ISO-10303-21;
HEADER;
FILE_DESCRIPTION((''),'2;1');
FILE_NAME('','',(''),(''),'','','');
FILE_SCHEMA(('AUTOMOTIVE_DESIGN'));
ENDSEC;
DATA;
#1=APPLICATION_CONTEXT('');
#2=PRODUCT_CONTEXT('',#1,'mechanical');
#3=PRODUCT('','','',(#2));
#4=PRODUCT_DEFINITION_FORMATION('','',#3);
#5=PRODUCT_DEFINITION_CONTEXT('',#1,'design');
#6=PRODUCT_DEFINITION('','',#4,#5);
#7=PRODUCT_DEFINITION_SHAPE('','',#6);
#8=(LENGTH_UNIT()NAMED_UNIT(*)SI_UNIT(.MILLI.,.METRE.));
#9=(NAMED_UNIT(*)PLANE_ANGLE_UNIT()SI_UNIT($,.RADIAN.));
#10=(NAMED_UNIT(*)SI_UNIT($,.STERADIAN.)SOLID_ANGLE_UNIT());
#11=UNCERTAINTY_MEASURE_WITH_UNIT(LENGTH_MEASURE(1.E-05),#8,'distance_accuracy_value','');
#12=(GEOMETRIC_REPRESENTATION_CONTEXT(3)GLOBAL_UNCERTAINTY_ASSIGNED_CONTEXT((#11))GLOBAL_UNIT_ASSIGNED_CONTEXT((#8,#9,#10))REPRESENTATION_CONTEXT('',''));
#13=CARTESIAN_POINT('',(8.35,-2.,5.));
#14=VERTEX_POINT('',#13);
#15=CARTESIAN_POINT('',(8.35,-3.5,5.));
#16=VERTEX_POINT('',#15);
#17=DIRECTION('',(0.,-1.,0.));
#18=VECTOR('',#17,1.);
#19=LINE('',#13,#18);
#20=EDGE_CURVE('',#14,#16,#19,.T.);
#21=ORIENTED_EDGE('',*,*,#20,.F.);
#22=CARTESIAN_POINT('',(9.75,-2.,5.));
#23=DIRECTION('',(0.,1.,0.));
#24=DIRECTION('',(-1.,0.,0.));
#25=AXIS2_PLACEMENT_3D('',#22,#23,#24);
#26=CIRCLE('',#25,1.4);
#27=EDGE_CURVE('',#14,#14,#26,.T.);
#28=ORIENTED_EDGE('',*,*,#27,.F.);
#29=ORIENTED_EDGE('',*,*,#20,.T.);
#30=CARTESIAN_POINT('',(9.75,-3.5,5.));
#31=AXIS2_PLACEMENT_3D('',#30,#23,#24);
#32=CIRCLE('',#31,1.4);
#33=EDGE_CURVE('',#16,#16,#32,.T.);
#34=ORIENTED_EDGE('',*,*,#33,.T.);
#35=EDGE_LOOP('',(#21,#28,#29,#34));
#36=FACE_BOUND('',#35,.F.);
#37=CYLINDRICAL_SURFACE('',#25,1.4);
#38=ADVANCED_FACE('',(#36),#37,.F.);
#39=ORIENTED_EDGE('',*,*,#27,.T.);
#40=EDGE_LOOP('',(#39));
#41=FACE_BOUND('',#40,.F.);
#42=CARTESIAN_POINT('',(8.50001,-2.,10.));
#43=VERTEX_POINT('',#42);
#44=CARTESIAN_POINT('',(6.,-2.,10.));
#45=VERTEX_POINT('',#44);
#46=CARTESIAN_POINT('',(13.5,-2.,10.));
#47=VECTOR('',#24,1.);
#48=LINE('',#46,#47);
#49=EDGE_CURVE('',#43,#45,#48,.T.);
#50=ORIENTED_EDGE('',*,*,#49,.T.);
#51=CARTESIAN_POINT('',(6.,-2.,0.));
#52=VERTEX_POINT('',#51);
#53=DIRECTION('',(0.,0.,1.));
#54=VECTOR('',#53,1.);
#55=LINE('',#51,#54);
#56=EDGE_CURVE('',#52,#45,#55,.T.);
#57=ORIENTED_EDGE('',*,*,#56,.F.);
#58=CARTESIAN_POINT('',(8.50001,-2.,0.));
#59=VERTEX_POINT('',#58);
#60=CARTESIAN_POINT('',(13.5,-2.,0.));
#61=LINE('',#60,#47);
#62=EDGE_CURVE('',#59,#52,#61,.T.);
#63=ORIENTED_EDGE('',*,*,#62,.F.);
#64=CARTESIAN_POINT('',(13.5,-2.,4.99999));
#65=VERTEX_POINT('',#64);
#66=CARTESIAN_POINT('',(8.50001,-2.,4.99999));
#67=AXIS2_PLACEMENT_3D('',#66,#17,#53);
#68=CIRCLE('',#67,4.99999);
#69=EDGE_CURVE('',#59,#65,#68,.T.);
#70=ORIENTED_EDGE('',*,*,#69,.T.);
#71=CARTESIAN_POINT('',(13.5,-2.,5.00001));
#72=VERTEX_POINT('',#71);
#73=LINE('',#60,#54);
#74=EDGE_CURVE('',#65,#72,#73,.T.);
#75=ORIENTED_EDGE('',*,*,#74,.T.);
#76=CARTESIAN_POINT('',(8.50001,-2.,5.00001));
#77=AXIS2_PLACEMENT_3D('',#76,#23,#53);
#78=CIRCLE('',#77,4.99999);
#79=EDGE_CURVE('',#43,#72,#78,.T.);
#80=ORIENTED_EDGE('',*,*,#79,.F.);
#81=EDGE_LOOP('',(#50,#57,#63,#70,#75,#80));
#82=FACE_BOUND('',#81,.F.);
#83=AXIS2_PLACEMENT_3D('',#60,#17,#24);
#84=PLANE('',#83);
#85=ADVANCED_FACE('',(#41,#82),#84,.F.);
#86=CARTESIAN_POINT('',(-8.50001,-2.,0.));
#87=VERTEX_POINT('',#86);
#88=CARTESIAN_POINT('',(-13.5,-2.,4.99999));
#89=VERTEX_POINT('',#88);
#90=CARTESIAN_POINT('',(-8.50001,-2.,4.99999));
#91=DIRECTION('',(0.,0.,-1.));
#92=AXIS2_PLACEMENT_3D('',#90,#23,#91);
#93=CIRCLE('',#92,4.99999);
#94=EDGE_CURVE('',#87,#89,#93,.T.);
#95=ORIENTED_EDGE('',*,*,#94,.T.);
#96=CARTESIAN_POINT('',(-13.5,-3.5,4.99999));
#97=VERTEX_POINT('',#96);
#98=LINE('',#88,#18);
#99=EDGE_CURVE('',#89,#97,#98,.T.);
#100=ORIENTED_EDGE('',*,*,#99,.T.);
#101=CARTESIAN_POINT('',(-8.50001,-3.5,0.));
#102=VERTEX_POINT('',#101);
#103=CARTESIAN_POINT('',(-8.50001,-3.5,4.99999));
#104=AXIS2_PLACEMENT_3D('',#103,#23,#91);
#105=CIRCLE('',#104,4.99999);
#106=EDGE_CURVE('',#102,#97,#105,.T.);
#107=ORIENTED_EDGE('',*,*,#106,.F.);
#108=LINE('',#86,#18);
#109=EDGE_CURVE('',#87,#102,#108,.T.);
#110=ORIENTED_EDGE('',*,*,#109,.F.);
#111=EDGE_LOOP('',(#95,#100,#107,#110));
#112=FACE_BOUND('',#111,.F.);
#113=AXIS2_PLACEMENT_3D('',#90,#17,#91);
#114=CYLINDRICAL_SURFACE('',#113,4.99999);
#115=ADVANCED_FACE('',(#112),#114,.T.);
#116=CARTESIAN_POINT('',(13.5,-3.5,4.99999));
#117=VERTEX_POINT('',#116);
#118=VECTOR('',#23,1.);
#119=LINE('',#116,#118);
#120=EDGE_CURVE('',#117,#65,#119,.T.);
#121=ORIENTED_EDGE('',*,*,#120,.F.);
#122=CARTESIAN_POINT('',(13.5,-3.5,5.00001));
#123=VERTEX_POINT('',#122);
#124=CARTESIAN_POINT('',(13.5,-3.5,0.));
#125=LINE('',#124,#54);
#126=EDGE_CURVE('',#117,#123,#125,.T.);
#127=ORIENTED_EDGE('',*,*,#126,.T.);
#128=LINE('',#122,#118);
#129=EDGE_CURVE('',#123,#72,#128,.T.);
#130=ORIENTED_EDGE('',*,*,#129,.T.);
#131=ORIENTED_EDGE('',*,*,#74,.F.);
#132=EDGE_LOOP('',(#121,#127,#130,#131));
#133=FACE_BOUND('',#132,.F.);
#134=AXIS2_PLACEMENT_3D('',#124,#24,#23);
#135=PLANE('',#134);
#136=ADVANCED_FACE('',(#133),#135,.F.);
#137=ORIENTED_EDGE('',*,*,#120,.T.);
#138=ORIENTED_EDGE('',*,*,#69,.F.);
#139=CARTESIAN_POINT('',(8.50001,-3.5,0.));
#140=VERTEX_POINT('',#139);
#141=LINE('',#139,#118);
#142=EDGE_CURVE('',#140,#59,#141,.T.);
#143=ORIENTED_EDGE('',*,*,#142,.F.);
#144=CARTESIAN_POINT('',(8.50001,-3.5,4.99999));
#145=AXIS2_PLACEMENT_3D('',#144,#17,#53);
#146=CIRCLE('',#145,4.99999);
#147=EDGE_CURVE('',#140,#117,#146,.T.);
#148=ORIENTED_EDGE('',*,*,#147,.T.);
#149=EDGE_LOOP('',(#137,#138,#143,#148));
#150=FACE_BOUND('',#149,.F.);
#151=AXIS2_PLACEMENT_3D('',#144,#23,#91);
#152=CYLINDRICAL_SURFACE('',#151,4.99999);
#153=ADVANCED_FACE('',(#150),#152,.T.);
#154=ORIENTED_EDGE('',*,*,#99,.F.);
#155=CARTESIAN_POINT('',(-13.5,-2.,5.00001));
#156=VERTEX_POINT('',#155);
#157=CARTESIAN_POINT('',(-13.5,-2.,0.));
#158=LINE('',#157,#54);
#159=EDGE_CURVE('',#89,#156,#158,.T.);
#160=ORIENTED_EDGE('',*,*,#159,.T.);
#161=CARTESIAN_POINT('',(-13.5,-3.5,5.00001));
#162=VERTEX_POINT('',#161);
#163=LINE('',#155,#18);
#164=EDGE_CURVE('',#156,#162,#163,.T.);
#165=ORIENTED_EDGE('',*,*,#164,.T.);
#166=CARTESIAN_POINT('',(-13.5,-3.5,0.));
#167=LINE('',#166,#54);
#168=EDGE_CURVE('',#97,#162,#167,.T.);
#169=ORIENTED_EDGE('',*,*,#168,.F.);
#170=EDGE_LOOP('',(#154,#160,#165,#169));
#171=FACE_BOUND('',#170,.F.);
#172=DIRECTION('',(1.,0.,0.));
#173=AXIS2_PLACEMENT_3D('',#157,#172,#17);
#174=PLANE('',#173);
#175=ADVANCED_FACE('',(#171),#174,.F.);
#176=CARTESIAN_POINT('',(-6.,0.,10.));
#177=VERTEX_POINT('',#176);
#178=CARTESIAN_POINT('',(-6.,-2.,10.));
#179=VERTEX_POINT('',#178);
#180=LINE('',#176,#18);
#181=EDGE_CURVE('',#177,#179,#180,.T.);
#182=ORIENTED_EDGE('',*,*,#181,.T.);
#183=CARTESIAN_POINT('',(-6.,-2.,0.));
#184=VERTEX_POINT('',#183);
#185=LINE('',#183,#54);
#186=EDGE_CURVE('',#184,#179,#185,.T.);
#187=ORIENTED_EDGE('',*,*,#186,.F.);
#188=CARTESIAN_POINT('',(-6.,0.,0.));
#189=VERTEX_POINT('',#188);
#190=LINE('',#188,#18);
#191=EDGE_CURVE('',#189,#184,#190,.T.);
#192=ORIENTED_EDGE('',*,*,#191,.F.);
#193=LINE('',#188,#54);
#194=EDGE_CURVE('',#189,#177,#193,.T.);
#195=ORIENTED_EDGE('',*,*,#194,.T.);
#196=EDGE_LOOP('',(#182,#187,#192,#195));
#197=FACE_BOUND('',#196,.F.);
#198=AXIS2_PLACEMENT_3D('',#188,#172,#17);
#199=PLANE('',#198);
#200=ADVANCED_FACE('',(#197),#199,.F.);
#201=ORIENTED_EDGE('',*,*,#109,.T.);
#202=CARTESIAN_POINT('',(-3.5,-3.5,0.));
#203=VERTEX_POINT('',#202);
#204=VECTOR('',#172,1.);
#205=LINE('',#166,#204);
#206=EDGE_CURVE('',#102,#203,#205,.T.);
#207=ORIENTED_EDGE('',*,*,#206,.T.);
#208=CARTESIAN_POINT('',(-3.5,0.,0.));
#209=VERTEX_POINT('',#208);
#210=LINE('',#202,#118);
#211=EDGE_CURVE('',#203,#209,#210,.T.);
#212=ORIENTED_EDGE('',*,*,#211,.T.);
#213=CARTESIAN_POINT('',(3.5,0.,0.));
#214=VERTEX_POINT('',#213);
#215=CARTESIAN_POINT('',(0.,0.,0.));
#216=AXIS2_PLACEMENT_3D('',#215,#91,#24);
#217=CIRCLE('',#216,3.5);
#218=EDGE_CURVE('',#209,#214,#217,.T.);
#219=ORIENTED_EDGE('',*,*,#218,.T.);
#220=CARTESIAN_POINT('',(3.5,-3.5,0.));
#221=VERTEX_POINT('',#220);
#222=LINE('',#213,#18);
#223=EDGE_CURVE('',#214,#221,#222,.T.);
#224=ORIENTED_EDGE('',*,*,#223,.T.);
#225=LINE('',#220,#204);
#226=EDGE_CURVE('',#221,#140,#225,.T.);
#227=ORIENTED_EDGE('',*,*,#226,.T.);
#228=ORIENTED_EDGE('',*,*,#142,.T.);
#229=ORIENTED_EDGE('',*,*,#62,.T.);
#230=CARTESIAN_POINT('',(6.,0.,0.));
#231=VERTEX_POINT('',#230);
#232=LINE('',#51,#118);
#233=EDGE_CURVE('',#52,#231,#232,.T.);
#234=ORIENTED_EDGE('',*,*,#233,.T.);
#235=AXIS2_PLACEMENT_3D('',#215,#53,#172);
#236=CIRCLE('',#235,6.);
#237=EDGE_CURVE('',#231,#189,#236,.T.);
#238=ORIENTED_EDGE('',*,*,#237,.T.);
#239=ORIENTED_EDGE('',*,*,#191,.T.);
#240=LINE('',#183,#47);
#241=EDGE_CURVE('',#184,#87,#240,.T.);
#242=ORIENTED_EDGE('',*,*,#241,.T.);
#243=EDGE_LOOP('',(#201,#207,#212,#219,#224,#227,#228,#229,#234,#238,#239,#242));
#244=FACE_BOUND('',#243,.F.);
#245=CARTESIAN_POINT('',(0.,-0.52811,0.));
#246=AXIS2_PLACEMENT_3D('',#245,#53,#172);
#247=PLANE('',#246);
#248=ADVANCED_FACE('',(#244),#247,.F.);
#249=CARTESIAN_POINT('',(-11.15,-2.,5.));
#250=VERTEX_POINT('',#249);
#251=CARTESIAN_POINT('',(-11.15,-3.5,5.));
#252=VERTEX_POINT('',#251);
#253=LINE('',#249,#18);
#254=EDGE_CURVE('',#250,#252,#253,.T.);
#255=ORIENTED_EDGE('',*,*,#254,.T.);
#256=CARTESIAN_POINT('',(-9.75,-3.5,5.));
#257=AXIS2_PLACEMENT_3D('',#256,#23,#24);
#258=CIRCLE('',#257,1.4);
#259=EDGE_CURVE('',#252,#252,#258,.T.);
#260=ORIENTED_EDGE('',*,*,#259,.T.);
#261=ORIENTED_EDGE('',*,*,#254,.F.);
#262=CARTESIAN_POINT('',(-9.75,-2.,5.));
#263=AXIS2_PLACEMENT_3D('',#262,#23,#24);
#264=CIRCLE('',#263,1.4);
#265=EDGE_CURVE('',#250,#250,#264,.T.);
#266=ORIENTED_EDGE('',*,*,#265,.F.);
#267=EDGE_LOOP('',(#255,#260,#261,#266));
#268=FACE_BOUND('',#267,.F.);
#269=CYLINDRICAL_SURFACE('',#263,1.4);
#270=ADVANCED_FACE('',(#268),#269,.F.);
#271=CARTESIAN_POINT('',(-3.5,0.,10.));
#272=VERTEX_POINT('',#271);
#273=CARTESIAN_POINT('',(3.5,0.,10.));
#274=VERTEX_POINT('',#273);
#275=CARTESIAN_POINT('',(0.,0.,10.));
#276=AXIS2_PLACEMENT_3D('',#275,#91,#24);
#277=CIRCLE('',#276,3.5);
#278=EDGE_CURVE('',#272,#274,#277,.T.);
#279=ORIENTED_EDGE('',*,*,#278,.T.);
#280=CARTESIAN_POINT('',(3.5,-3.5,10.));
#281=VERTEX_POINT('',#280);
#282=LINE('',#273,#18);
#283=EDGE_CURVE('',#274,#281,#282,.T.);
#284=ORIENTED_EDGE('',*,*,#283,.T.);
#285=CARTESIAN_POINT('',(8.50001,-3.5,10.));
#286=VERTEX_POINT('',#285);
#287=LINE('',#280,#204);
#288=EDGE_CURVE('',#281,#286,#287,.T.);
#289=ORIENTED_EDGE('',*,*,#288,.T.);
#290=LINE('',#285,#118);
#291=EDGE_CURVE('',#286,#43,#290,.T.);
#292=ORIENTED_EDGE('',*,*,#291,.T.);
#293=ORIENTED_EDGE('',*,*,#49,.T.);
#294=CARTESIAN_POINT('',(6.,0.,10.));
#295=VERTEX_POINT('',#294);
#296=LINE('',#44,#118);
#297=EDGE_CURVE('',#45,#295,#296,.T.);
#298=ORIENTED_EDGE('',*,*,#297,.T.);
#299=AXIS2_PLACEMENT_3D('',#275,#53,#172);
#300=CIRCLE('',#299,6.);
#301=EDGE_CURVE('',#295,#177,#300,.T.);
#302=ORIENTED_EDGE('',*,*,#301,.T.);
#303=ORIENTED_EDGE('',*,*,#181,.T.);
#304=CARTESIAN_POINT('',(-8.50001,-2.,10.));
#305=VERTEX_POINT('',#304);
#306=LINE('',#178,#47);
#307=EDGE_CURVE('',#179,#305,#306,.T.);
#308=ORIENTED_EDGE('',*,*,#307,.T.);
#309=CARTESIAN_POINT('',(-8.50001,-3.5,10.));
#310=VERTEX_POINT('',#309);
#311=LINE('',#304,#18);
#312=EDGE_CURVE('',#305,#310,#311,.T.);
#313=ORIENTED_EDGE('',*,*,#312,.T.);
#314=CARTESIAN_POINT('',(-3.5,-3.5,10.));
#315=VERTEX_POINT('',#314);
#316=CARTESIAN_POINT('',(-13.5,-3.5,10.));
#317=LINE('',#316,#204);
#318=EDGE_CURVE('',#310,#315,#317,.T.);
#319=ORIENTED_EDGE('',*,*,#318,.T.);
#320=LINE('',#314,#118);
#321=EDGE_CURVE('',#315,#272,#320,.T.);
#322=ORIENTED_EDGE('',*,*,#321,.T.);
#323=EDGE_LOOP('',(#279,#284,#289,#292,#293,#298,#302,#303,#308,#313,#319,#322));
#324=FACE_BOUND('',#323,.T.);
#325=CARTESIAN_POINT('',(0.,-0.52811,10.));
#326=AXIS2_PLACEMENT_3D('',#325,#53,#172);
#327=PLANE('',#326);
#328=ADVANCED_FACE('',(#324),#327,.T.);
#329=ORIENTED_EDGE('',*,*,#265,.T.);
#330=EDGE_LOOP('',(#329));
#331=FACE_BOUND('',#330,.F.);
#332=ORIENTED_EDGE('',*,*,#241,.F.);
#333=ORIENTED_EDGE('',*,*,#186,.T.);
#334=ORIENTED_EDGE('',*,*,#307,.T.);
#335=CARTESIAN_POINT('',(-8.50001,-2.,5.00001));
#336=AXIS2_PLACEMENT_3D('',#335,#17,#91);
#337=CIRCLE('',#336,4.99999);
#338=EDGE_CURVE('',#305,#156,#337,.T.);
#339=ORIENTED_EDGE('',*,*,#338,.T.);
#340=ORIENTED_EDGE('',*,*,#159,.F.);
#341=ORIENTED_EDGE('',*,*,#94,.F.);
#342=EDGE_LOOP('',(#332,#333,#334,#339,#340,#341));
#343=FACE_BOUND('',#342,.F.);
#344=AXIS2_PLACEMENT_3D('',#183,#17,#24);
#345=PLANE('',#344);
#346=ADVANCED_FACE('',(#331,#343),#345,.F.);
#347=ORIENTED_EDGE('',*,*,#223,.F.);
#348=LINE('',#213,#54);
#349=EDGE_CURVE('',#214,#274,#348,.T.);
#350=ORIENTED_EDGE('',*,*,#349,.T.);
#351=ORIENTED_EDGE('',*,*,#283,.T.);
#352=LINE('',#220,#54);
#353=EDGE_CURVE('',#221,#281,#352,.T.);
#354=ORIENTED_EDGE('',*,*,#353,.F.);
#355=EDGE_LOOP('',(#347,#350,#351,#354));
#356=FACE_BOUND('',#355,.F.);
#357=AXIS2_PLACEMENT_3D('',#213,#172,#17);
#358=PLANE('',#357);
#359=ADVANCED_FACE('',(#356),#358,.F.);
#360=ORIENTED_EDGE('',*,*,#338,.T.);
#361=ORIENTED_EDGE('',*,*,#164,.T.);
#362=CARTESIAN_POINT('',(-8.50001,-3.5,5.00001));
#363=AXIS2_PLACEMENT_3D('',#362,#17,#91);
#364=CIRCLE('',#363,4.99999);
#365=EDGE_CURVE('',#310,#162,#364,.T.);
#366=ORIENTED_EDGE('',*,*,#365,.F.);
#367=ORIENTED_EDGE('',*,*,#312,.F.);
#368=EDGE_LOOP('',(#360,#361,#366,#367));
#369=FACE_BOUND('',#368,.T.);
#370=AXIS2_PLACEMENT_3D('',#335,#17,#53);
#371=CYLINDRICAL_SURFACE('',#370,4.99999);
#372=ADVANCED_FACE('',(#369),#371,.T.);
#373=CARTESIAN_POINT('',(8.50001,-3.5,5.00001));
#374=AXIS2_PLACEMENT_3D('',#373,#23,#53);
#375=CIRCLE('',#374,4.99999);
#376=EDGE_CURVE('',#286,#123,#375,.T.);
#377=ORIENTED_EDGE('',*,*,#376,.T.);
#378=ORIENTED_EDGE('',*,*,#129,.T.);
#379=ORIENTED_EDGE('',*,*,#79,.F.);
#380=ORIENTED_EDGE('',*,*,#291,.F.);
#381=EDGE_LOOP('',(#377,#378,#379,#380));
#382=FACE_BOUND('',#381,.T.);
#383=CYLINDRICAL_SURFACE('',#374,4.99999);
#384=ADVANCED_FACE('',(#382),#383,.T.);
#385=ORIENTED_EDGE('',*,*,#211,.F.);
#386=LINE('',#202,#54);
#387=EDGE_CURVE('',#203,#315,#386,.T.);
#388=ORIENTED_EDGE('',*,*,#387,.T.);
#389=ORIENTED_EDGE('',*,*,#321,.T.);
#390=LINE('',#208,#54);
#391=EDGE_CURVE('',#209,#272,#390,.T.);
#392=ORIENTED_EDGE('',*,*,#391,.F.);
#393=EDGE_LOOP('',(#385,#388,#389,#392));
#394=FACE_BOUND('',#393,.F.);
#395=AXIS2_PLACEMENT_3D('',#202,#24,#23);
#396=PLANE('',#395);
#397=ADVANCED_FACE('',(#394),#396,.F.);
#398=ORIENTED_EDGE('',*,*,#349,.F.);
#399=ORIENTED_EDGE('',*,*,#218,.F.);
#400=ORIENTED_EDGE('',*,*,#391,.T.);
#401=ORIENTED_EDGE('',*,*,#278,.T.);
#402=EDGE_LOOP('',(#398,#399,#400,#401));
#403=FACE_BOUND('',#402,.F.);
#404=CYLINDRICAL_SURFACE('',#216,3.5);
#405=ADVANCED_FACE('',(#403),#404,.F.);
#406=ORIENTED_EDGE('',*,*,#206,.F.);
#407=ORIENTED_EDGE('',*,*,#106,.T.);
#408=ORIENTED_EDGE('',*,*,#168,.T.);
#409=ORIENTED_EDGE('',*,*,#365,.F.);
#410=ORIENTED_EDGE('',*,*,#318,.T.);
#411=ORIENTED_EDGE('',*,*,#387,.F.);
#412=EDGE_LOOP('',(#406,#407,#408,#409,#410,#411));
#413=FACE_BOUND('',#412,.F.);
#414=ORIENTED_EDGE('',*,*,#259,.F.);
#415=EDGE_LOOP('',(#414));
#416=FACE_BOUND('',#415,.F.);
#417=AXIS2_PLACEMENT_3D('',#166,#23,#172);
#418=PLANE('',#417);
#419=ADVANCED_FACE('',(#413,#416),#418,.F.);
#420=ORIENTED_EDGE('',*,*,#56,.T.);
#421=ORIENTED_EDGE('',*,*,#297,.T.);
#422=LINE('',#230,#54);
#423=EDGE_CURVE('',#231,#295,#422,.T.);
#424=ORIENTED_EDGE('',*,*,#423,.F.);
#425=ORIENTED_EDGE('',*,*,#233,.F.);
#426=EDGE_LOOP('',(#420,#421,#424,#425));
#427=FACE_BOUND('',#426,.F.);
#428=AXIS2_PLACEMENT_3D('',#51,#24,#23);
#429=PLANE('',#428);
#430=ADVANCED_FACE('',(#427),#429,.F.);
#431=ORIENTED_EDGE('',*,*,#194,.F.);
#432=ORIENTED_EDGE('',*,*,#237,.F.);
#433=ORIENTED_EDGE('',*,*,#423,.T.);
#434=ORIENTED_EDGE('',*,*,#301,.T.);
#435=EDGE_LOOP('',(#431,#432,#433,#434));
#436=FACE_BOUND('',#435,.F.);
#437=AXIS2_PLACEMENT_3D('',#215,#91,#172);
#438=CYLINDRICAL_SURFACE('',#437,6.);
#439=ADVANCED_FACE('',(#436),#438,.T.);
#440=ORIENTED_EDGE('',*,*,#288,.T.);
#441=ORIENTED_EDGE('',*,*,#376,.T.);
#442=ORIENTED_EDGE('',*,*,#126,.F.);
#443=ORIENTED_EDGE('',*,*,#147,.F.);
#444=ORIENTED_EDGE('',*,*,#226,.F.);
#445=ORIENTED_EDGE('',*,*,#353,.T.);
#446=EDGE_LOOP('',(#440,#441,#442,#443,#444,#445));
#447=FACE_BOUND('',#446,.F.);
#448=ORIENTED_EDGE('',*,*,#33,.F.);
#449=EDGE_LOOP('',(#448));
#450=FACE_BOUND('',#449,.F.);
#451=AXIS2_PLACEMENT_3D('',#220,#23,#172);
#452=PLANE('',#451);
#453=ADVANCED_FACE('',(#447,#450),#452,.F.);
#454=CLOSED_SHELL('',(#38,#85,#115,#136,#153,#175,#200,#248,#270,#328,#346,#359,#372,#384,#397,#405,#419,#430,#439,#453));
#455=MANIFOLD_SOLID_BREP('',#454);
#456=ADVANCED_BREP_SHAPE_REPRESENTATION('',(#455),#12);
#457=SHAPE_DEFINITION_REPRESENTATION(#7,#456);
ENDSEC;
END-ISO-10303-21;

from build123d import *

# Parameters (mm, degrees)
F1_DEPTH = 10
F2_R     = 1.4
F3_DEPTH = 25
F4_R     = 4.99999


# Not quite as in the source:
# - a fillet or chamfer is up to 0.001 mm smaller than in the source, because OpenCascade refuses the exact size


with BuildPart() as f1:
    # F0 (on Top) → F1 (new body)
    with BuildSketch(Plane.XY):
        with BuildLine():
            ThreePointArc((-3.5, 0), (0, 3.5), (3.5, 0))
            Line((3.5, 0), (3.5, -3.5))
            Line((3.5, -3.5), (13.5, -3.5))
            Line((13.5, -3.5), (13.5, -2))
            Line((13.5, -2), (6, -2))
            Line((6, -2), (6, 0))
            ThreePointArc((6, 0), (0, 6), (-6, 0))
            Line((-6, 0), (-6, -2))
            Line((-6, -2), (-13.5, -2))
            Line((-13.5, -2), (-13.5, -3.5))
            Line((-13.5, -3.5), (-3.5, -3.5))
            Line((-3.5, -3.5), (-3.5, 0))
        make_face()
    extrude(amount=F1_DEPTH)

    # F2 (on face) → F3 (cut)
    with BuildSketch(Plane(origin=(0, -2, 0), x_dir=(-1, 0, 0), z_dir=(0, 1, 0))):
        with Locations((9.75, 5)):
            Circle(F2_R)
        with Locations((-9.75, 5)):
            Circle(F2_R)
    extrude(amount=-F3_DEPTH, mode=Mode.SUBTRACT)

    # F4 (radius 5 in the source; OpenCascade refuses exactly that, so slightly less here)
    f4_edges = [f1.edges().sort_by_distance(p)[0] for p in [
        (-13.5, -2.75, 10),
        (13.5, -2.75, 10),
        (-13.5, -2.75, 0),
        (13.5, -2.75, 0),
    ]]
    fillet(f4_edges, radius=F4_R)


solid = f1.part
